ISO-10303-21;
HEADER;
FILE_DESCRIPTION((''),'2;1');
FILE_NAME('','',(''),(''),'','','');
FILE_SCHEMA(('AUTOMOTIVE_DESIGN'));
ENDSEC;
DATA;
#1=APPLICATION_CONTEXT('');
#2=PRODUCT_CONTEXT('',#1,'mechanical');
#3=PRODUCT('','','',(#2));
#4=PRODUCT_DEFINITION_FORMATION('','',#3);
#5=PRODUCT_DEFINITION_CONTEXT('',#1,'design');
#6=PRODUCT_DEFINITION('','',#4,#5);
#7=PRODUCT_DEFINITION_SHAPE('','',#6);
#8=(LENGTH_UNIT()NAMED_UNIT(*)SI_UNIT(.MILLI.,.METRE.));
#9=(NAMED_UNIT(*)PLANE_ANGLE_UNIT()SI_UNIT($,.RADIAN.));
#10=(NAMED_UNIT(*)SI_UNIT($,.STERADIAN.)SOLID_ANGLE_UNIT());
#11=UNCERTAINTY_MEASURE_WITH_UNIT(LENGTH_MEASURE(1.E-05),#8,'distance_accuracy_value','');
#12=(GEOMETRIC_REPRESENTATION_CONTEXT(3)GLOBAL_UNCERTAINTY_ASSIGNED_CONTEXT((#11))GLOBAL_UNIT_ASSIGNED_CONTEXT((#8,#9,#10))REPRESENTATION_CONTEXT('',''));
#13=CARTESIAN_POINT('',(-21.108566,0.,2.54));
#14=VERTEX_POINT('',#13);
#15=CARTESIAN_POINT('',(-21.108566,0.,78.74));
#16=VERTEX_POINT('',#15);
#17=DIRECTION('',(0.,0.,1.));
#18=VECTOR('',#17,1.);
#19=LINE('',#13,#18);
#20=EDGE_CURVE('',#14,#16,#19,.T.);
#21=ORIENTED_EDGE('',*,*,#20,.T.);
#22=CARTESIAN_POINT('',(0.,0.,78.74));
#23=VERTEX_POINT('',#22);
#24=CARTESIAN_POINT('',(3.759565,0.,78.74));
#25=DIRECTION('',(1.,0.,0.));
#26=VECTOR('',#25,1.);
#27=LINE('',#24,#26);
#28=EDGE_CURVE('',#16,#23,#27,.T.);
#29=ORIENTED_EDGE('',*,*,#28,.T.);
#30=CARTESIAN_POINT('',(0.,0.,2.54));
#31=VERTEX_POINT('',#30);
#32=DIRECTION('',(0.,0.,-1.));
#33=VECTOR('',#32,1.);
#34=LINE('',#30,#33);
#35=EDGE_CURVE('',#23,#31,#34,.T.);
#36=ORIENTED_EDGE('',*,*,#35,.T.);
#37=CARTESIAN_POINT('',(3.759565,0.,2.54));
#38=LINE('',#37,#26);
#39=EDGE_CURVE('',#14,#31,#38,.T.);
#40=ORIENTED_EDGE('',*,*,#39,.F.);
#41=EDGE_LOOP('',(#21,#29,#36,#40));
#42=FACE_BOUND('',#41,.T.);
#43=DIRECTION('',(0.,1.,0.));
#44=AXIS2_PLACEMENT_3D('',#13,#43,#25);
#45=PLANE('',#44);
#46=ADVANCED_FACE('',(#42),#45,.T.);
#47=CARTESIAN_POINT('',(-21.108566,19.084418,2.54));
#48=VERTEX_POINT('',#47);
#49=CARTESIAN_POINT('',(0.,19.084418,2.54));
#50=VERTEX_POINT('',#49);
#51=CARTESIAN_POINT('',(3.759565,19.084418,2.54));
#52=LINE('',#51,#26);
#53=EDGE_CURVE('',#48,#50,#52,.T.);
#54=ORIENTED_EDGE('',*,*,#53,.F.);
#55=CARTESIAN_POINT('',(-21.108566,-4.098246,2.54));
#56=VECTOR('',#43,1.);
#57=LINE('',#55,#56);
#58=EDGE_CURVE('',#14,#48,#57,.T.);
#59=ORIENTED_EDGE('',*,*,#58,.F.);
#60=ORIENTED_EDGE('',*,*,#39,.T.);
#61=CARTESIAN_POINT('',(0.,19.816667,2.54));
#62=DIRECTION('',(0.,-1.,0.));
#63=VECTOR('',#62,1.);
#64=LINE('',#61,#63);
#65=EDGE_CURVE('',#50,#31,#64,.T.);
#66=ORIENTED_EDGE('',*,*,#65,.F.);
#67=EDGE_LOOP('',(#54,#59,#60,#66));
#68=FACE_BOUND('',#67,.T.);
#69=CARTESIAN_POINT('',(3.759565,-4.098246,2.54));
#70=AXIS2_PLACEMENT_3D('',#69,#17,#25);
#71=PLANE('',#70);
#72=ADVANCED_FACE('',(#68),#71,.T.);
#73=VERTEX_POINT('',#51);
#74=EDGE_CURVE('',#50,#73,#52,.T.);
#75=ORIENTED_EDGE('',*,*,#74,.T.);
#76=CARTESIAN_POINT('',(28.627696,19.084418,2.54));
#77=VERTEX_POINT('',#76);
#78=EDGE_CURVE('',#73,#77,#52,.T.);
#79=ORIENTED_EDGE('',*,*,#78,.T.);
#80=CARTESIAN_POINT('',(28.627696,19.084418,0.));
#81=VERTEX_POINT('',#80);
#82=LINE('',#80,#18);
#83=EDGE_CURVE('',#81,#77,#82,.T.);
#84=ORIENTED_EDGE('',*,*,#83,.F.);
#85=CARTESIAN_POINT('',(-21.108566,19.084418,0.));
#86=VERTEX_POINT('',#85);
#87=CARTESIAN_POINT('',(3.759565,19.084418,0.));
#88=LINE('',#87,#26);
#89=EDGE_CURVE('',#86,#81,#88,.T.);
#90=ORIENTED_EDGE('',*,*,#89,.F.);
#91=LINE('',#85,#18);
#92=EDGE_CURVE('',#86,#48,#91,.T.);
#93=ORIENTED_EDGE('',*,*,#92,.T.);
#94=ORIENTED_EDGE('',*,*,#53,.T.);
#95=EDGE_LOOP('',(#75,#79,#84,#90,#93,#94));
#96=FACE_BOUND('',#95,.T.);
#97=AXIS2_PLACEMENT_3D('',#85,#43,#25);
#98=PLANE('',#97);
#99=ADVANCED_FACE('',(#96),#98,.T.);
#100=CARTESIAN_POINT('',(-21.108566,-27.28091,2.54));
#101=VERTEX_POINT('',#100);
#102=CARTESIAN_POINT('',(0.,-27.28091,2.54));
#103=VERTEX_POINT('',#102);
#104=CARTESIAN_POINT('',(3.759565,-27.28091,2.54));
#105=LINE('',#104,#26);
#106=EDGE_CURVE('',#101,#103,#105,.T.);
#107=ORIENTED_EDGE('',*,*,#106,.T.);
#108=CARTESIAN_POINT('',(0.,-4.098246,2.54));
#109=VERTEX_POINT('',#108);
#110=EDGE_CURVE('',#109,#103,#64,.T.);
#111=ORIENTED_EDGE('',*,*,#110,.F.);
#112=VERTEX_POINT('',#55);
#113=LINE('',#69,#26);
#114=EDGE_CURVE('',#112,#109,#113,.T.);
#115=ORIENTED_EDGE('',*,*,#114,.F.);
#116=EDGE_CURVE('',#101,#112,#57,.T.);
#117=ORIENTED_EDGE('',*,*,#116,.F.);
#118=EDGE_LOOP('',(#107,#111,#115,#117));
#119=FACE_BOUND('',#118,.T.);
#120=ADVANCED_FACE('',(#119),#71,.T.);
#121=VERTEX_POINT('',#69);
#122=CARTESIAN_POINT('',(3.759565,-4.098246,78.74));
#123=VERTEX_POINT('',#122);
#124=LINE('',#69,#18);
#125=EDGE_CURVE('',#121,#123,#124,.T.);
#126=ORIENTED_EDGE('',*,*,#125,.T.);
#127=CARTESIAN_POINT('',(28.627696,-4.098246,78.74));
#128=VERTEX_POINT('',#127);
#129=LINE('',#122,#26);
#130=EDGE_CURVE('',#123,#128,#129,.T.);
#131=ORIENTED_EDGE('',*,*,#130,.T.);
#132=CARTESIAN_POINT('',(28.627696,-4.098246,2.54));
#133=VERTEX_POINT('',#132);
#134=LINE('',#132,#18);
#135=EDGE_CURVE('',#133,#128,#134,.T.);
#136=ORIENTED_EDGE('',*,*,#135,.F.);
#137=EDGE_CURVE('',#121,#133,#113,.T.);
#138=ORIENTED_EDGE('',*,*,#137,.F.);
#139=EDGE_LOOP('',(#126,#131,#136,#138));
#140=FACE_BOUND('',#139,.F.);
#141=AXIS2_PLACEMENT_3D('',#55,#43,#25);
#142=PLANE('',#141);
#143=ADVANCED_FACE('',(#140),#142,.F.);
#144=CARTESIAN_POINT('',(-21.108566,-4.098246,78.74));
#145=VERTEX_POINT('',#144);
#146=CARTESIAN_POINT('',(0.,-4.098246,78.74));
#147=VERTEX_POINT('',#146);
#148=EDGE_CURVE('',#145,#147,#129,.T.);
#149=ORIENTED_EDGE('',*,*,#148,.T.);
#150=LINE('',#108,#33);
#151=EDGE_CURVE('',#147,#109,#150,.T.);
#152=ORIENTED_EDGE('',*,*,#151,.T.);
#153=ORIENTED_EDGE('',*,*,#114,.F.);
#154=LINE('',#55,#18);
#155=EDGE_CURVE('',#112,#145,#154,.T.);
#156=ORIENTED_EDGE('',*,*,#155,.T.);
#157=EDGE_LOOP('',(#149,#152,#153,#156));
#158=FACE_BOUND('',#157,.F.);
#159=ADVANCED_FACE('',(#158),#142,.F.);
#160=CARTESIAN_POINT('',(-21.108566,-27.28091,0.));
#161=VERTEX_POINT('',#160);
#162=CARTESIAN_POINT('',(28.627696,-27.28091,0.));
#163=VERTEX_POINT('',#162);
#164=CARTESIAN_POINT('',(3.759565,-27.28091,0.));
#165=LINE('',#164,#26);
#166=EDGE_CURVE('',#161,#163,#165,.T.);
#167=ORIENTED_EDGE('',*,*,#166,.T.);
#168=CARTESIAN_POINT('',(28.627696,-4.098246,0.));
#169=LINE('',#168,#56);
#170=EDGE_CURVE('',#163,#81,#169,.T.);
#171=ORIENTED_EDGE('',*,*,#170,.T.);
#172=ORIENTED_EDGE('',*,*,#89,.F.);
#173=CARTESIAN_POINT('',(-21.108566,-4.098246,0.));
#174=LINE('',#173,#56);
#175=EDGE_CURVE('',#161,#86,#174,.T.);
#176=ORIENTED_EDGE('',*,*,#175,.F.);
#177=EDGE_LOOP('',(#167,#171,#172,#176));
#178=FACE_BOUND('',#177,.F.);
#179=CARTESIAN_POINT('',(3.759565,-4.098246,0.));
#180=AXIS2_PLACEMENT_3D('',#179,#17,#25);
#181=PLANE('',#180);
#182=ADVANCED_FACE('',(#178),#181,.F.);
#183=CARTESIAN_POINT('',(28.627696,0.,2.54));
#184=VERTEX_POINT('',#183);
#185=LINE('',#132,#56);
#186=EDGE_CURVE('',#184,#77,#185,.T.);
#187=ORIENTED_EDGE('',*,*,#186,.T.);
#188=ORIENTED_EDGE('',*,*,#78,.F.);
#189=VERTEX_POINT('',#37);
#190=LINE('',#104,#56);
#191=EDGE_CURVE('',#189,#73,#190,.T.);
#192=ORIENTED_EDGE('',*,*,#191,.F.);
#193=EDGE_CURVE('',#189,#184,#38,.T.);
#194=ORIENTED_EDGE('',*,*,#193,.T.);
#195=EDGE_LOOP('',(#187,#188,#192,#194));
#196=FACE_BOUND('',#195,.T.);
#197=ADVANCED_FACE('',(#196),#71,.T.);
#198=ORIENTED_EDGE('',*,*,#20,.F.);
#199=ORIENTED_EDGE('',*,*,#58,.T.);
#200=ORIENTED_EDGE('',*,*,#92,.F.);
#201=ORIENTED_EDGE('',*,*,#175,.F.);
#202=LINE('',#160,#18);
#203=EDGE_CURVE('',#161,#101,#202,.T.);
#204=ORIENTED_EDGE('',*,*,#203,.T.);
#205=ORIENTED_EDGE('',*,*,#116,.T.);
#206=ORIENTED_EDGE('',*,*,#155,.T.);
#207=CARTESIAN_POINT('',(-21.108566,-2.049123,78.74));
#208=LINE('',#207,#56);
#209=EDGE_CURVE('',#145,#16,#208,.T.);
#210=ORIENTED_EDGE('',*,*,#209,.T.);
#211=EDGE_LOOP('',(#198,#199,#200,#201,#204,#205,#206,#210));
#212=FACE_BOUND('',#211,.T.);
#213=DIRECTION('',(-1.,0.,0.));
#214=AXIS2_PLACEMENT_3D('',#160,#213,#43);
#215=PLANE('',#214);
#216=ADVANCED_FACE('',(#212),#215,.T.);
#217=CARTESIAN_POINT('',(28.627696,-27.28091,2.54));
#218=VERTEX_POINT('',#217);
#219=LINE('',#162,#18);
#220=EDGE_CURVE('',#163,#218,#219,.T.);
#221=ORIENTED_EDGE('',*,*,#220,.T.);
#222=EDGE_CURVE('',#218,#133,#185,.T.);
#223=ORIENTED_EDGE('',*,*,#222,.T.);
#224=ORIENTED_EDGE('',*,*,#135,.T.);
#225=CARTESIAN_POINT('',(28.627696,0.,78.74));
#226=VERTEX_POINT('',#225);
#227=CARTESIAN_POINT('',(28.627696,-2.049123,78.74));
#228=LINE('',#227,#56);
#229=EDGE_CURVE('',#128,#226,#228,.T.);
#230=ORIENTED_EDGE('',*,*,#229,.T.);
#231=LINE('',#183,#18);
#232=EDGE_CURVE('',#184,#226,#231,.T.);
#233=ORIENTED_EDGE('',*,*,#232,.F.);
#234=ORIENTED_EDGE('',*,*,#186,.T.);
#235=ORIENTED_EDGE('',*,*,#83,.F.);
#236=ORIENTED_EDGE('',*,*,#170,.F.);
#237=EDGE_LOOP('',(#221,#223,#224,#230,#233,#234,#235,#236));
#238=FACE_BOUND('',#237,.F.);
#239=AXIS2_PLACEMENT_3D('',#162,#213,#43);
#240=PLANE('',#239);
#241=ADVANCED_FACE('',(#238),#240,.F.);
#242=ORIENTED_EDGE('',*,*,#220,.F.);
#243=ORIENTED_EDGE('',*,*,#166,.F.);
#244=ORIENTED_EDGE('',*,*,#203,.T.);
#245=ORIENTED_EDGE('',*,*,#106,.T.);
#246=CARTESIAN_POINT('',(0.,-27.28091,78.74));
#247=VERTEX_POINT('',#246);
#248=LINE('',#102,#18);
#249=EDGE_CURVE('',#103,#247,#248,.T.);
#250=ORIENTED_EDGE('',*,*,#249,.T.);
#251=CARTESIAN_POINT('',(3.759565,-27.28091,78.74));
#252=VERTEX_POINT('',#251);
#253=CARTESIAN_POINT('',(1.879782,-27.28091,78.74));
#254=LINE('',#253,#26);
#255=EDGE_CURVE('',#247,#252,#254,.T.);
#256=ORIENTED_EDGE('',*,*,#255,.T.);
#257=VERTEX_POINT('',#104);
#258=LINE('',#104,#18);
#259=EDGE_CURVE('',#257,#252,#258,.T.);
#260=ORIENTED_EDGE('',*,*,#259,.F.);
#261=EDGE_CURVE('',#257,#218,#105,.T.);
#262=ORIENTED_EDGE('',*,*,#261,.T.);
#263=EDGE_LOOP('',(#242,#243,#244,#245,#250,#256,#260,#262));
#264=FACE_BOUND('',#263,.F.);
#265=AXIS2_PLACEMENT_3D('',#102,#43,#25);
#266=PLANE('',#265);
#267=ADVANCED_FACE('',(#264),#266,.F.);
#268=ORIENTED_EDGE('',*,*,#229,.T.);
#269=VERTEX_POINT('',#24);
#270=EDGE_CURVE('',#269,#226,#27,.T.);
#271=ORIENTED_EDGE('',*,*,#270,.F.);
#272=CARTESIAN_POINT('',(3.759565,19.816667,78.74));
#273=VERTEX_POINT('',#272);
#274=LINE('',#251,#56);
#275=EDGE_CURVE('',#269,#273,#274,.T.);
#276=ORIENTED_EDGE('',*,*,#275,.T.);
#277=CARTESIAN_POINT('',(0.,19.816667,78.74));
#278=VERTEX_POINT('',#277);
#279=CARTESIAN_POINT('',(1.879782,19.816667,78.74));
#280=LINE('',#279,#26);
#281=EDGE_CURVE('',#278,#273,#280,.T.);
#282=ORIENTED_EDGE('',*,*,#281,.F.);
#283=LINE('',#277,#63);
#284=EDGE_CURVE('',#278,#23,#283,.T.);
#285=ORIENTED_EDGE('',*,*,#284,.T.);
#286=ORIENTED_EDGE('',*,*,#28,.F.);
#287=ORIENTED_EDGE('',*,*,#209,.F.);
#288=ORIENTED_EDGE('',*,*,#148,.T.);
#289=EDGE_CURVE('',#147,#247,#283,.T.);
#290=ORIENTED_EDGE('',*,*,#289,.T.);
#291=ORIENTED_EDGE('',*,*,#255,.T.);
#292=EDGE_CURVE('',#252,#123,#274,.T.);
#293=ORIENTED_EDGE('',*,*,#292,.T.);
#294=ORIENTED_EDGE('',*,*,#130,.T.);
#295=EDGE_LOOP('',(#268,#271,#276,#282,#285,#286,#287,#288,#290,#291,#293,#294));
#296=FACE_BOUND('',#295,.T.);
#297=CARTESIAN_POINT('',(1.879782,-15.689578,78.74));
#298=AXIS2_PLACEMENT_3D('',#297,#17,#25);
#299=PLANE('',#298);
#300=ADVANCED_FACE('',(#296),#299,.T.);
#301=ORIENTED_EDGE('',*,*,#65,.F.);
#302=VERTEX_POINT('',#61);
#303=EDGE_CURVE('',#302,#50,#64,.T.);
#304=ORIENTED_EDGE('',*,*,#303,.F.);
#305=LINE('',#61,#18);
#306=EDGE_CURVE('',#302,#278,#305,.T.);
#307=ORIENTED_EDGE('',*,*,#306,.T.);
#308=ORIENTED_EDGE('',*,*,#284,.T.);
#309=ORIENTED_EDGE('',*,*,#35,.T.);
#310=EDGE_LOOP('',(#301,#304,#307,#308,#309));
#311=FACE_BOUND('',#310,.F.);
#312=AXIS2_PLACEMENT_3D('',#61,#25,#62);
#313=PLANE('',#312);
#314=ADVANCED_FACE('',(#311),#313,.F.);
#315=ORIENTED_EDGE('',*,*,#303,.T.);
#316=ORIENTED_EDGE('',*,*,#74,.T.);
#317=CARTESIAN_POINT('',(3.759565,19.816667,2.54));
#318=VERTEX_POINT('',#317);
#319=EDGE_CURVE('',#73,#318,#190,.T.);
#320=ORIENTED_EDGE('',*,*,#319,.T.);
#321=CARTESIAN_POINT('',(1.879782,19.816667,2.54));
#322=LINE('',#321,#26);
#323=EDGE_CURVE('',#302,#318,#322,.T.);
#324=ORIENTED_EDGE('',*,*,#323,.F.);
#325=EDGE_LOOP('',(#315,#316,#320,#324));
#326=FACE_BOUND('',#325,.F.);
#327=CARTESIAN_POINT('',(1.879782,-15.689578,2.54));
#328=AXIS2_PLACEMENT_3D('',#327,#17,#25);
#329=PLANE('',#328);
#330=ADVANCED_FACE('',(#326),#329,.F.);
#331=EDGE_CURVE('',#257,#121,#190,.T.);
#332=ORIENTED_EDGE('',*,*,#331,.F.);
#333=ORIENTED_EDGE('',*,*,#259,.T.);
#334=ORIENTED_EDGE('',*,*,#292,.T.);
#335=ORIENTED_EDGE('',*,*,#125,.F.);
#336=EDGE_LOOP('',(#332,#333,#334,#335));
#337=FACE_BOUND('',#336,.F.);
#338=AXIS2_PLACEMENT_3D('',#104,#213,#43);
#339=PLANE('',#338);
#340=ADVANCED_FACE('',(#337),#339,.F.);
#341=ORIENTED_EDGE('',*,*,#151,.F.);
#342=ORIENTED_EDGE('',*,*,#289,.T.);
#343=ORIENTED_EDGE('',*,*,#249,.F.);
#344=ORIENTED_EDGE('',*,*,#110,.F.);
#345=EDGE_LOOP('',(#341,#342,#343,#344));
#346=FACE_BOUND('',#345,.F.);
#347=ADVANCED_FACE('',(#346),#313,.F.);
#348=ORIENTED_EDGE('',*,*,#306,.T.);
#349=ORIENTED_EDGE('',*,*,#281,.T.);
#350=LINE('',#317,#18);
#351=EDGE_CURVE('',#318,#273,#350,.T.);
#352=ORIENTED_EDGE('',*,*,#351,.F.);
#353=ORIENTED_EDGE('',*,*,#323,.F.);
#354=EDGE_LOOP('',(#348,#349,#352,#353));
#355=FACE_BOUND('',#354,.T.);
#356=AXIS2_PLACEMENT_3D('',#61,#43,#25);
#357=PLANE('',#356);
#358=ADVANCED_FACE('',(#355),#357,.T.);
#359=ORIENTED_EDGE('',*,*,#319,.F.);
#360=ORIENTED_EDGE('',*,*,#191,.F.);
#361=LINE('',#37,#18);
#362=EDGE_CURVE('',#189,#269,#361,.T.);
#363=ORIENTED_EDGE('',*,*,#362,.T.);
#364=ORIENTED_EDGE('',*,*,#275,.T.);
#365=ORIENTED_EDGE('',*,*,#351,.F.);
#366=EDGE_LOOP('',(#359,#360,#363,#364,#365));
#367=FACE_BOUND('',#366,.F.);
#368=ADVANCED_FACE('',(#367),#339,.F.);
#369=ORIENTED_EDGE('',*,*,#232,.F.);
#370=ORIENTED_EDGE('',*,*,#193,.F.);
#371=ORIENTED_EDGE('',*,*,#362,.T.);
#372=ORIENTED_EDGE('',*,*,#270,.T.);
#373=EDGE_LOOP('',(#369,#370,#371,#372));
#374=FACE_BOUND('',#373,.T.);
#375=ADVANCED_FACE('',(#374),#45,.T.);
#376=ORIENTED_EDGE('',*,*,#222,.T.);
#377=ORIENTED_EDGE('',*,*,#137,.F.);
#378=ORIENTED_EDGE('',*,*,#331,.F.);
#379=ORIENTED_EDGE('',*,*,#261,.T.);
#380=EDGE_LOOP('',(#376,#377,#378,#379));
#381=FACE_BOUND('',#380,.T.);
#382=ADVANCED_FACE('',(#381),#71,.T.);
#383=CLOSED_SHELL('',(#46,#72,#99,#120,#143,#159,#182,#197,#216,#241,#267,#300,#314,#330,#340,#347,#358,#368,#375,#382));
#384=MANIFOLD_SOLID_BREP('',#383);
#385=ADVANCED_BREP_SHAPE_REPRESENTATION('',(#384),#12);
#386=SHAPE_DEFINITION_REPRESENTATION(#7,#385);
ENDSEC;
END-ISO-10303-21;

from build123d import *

# Parameters (mm, degrees)
F0_W     = 49.7362613678
F0_H     = 46.3653281331
F1_DEPTH = 2.54
F2_W     = 49.7362613678
F2_H     = 4.098245874
F3_DEPTH = 76.2
F4_W     = 3.7595648319
F4_H     = 23.1826640666
F4_H_2   = 23.9149127156
F5_DEPTH = 76.2


# Not quite as in the source:
# - the program builds the solid bodies; features that only make, move or delete a surface that nothing else refers to are left out


with BuildPart() as f1:
    # F0 (on Top) → F1 (new body)
    with BuildSketch(Plane.XY):
        with Locations((3.7595648319, -4.098245874)):
            Rectangle(F0_W, F0_H)
    extrude(amount=F1_DEPTH)

    # F2 (on face) → F3 (join)
    with BuildSketch(Plane.XY.offset(2.54)):
        with Locations((3.7595648319, -2.049122937)):
            Rectangle(F2_W, F2_H)
    extrude(amount=F3_DEPTH)

    # F4 (on face) → F5 (join)
    with BuildSketch(Plane.XY.offset(2.54)):
        with Locations((1.8797824159, -15.6895779073)):
            Rectangle(F4_W, F4_H)
        with Locations((1.8797824159, 7.8592104837)):
            Rectangle(F4_W, F4_H_2)
    extrude(amount=F5_DEPTH)


solid = f1.part
